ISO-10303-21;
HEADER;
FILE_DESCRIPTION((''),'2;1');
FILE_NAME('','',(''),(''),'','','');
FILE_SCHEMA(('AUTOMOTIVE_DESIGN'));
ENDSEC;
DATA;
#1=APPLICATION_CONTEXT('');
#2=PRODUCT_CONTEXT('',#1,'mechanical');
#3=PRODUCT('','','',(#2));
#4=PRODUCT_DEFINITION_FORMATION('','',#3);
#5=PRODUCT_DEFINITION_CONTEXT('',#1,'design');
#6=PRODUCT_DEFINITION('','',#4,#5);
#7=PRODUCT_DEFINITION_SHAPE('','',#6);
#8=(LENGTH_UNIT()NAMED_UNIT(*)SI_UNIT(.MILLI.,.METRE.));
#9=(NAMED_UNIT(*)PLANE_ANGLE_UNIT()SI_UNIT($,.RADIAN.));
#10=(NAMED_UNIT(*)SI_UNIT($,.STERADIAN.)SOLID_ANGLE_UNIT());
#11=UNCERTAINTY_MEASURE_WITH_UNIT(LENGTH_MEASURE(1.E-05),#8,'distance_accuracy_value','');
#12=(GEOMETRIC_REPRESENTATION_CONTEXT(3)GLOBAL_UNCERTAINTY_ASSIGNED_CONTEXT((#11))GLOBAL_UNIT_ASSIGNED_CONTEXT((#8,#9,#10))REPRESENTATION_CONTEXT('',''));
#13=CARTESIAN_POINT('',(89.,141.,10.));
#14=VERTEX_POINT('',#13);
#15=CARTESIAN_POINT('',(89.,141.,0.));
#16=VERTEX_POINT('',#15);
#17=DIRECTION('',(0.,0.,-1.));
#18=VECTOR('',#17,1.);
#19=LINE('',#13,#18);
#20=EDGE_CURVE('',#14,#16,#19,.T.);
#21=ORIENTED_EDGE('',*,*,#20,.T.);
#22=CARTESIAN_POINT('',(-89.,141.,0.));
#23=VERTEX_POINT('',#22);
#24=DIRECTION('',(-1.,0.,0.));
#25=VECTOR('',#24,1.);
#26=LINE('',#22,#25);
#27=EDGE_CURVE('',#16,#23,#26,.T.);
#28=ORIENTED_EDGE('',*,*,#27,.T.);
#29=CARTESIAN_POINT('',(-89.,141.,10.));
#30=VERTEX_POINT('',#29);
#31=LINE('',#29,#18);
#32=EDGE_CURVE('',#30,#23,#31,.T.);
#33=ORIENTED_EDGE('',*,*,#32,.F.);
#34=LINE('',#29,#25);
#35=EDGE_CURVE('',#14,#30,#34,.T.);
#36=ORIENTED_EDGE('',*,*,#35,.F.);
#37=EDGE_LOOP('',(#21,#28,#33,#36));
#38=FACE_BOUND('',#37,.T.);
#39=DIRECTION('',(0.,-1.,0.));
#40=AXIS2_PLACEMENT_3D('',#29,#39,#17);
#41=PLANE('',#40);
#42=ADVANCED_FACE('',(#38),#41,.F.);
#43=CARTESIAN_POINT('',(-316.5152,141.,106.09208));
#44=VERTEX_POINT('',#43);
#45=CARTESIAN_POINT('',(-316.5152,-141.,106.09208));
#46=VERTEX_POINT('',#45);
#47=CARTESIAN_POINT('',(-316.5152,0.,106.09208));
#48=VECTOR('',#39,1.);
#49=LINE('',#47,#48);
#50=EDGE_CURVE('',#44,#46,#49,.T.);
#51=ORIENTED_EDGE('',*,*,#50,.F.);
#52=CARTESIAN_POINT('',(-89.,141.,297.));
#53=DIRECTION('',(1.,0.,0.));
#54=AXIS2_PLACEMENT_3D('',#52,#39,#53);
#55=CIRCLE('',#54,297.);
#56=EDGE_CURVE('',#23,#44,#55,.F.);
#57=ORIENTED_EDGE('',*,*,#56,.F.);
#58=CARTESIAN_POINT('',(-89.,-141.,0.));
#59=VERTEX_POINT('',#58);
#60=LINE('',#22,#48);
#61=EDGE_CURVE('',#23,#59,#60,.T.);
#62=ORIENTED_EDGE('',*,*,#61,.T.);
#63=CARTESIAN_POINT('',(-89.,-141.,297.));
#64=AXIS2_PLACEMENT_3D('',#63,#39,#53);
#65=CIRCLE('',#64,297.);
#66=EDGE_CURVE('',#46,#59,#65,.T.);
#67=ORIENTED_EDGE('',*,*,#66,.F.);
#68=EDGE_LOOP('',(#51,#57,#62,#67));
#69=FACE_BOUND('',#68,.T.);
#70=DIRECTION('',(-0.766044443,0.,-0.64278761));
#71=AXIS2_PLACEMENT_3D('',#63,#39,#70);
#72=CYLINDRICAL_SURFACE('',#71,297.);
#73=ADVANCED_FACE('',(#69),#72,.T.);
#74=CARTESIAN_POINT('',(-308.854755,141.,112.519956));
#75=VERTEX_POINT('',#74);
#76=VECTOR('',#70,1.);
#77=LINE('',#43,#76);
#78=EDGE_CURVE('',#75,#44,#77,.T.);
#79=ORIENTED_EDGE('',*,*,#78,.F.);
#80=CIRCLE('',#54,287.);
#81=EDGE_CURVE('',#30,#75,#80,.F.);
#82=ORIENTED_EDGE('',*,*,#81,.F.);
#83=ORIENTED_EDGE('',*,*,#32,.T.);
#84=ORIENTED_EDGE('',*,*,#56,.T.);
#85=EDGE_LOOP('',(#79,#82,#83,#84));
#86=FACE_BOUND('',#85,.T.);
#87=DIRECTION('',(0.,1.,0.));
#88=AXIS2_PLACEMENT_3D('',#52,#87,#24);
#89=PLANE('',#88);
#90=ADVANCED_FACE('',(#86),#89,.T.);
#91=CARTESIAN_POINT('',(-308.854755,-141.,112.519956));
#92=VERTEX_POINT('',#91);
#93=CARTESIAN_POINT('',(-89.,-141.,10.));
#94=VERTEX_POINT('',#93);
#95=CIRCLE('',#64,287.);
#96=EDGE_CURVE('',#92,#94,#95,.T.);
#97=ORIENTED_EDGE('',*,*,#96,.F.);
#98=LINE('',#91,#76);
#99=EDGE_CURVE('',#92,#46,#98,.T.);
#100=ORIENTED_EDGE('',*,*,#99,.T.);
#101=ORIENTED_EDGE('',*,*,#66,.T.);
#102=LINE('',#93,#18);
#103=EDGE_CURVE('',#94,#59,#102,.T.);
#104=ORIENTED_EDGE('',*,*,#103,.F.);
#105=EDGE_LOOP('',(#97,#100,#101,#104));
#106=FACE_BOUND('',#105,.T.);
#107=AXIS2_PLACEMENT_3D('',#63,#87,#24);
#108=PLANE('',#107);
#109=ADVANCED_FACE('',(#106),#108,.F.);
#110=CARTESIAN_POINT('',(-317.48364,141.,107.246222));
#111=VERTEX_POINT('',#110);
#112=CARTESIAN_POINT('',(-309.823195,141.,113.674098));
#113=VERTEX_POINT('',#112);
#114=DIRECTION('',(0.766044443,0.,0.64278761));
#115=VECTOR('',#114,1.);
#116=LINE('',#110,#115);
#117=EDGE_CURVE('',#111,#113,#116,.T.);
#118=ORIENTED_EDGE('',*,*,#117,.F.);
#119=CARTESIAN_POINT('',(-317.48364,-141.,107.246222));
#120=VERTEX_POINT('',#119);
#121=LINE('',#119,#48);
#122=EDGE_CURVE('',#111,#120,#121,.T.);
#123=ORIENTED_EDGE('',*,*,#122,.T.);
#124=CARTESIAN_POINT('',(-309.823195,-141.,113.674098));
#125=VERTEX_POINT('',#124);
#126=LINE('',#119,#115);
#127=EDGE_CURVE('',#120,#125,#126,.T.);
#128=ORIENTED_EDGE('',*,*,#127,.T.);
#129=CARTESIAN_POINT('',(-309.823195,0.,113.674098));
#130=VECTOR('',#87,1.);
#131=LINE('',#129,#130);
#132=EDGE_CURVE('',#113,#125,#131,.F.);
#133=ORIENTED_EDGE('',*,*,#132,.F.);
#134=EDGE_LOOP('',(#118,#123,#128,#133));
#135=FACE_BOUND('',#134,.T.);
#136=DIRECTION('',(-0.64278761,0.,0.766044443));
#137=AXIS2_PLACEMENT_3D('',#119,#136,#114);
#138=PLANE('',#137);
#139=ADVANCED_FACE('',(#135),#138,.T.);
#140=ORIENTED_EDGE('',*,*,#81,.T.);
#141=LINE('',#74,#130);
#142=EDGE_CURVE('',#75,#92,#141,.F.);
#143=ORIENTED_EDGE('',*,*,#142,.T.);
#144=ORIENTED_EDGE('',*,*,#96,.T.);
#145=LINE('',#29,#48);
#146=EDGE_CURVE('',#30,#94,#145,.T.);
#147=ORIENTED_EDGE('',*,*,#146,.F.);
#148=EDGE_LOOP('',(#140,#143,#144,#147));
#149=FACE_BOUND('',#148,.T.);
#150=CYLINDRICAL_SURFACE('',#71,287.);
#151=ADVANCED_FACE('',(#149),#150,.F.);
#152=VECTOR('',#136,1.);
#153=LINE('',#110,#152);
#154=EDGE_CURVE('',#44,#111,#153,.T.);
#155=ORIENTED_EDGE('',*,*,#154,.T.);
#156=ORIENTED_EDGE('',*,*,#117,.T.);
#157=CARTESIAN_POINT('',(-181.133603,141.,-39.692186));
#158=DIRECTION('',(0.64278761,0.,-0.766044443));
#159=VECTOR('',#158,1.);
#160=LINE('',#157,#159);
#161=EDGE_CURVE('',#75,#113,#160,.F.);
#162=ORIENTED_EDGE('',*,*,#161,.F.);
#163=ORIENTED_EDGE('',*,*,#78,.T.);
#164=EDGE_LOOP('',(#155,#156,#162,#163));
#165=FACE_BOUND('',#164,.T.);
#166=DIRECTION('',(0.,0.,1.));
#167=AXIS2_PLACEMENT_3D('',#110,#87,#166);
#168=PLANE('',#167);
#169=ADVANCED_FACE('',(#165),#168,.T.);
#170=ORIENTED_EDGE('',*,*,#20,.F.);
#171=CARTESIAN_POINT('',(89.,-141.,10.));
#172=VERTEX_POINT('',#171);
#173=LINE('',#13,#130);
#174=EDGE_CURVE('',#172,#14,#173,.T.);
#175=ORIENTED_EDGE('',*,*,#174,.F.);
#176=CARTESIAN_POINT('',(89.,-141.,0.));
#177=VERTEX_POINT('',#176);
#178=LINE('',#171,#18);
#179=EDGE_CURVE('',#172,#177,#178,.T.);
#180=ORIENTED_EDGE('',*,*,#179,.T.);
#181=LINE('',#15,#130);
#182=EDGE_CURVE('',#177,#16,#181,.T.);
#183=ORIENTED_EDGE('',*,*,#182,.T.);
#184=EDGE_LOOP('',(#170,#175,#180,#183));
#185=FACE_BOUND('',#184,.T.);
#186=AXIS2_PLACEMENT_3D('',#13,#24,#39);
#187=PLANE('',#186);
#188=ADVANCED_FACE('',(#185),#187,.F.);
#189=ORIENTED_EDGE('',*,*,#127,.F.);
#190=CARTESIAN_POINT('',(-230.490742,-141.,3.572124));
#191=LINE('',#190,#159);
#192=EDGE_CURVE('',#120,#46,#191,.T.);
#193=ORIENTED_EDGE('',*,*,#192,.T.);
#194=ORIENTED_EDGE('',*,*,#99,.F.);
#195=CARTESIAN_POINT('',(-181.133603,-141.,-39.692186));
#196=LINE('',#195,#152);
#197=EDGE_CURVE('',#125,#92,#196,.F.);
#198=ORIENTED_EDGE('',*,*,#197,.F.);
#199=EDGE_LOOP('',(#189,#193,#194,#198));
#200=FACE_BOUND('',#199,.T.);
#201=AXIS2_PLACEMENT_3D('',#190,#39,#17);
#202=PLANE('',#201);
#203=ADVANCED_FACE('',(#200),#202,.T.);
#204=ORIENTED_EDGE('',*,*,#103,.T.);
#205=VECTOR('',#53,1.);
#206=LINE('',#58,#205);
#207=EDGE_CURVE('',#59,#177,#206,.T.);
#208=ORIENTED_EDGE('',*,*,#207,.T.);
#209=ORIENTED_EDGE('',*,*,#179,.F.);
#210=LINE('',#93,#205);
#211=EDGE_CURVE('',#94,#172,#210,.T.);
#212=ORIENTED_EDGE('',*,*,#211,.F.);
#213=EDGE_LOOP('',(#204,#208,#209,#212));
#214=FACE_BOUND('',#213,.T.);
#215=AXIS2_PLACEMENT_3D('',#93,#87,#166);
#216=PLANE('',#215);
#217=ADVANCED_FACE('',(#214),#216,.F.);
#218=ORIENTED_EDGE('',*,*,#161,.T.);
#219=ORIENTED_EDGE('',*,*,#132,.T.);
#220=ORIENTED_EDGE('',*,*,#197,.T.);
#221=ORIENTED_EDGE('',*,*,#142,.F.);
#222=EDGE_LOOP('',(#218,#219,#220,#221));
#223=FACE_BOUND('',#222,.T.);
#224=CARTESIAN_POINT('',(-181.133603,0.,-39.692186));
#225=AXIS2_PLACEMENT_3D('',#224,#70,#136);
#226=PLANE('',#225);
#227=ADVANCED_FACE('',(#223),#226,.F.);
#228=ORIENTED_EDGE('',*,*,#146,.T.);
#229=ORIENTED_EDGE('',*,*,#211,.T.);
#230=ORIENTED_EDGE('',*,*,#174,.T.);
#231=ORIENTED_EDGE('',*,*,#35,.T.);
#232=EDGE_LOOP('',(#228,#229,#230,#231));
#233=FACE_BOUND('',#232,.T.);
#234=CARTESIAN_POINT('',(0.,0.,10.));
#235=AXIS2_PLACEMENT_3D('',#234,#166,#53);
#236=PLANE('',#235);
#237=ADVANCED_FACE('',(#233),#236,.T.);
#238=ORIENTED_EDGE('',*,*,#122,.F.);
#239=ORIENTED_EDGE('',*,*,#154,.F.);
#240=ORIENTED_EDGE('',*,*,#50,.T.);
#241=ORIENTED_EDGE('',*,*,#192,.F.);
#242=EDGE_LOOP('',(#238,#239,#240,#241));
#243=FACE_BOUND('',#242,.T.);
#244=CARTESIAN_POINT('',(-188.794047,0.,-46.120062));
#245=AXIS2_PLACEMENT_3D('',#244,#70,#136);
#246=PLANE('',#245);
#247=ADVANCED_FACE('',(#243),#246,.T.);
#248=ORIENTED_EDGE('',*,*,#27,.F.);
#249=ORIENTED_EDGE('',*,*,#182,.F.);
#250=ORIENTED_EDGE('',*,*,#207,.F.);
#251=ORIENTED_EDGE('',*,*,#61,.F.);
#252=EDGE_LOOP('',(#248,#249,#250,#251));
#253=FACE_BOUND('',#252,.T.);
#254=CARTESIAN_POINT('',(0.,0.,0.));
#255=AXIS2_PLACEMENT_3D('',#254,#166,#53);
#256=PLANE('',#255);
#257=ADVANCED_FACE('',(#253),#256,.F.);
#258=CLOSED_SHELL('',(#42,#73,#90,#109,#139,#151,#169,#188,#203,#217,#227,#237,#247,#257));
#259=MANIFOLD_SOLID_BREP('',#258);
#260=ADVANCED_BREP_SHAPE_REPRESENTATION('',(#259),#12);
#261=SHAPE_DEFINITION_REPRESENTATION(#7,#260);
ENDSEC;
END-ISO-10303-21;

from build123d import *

# Parameters (mm, degrees)
SKETCH2_W          = 178
SKETCH2_H          = 282
BASE_FLANGE1_DEPTH = 10
EDGE_FLANGE2_DEPTH = 282


# Sheet-metal steps are written as plain solids
with BuildPart() as part:
    # Sketch2 → Base-Flange1 (new body)
    with BuildSketch(Plane.XY):
        Rectangle(SKETCH2_W, SKETCH2_H)
    extrude(amount=BASE_FLANGE1_DEPTH)

    # Edge-Flange2 section (across the edge) → Edge-Flange2 (add)
    with BuildSketch(Plane(origin=(-222.83029789, 141, 10), x_dir=(0.7660444431189746, 0, 0.6427876096865435), z_dir=(0, -1, 0))):
        with BuildLine():
            Line((-10, 133.83029789), (-10, 135.336923418))
            Line((-10, 135.336923418), (0, 135.336923418))
            Line((0, 135.336923418), (0, 133.83029789))
            ThreePointArc((0, 133.83029789), (26.88966512, 12.538856771), (102.51995602, -86.024457285))
            Line((102.51995602, -86.024457285), (96.092079923, -93.684901716))
            ThreePointArc((96.092079923, -93.684901716), (17.82658725, 8.312674153), (-10, 133.83029789))
        make_face()
    extrude(amount=EDGE_FLANGE2_DEPTH)


solid = part.part
